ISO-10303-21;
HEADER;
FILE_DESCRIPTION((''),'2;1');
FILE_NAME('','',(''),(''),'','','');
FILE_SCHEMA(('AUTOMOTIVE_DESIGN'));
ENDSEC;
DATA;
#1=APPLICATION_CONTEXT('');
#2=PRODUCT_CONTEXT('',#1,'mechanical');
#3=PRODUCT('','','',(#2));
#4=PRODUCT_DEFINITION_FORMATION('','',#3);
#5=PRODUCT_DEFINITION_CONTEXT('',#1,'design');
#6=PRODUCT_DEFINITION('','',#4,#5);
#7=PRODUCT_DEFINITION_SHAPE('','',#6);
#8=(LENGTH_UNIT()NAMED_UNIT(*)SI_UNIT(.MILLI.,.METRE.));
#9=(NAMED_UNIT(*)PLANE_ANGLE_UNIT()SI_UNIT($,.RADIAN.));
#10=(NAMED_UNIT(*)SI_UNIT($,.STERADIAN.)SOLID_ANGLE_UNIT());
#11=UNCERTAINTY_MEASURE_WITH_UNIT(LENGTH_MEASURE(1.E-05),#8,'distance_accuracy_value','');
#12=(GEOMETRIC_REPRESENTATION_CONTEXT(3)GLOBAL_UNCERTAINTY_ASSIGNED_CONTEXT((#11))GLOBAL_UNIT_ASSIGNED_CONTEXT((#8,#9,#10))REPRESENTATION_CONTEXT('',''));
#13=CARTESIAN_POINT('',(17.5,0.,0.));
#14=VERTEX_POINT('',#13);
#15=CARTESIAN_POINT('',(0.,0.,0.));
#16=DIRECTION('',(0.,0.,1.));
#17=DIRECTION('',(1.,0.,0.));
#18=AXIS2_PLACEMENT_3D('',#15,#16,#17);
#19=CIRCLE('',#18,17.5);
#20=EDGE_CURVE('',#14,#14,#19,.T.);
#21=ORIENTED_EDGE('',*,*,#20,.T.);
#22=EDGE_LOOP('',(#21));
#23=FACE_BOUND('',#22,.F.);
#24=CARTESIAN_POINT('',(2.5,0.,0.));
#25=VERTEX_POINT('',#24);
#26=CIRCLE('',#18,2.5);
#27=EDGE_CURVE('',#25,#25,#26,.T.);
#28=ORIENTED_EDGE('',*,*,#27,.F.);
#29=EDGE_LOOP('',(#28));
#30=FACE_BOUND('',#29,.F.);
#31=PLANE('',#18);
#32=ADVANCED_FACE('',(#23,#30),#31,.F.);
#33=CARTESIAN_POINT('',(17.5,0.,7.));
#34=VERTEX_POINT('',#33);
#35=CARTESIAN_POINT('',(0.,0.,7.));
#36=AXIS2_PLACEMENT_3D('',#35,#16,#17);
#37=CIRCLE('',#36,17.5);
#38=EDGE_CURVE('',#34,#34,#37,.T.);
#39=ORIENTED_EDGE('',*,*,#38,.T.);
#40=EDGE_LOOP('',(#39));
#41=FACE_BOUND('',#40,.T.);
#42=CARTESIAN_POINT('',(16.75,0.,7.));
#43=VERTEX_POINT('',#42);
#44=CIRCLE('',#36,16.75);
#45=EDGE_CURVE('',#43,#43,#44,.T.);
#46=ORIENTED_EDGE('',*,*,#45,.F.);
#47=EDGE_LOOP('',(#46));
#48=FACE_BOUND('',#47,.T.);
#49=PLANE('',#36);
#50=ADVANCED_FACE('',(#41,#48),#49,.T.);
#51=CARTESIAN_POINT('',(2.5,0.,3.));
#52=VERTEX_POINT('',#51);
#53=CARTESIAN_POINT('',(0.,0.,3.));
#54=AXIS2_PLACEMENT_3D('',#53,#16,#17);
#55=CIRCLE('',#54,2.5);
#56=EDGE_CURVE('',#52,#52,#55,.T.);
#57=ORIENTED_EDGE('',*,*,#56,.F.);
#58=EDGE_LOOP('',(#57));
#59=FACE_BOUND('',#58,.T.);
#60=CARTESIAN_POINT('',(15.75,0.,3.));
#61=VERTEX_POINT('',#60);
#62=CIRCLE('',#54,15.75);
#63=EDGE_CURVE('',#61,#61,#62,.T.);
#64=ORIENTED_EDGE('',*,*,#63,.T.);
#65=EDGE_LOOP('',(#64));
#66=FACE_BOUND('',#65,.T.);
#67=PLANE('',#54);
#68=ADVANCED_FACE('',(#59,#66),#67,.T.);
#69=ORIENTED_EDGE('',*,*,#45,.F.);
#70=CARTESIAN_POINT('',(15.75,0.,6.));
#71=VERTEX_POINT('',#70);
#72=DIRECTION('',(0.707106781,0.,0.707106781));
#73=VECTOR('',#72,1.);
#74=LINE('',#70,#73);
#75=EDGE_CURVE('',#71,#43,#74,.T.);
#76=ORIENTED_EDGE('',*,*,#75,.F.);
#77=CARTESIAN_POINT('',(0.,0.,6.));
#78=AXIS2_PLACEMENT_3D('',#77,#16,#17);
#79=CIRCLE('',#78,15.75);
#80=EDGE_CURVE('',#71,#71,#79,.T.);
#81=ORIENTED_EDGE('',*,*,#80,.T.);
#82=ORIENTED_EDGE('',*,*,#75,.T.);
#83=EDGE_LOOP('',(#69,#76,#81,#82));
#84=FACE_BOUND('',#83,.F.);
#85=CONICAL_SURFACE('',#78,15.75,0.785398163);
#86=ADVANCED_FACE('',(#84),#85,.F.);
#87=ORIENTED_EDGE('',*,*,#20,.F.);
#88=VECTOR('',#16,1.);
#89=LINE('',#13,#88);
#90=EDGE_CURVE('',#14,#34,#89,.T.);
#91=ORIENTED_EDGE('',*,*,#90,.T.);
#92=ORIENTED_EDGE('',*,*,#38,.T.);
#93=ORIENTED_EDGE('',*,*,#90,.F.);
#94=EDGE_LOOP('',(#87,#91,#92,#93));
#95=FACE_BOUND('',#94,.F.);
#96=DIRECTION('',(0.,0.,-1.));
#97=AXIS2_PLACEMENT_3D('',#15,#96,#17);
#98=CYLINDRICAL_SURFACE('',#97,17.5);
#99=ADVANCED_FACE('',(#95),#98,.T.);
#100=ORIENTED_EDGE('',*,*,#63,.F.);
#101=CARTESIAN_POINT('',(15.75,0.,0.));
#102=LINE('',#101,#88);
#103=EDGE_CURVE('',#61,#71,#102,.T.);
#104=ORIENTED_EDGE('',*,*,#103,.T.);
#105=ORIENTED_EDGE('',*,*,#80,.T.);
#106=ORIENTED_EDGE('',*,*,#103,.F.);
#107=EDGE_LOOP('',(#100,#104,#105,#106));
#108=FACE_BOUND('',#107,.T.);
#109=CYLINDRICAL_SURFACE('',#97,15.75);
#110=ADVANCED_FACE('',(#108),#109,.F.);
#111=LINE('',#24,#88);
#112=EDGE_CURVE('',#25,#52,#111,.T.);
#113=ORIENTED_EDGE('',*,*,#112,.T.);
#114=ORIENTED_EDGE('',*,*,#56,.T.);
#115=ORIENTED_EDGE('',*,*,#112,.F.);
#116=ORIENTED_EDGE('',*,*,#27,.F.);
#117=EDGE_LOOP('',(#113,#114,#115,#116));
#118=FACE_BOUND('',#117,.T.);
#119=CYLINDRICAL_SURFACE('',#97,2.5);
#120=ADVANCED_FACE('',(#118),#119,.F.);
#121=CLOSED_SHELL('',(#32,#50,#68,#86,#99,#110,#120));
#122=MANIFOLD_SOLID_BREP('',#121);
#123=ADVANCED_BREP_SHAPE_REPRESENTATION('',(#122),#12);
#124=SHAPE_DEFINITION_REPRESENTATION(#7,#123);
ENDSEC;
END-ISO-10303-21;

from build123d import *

# Parameters (mm, degrees)
F0_R     = 17.5
F0_R_2   = 15.75
F1_DEPTH = 7
F0_R_3   = 2.5
F2_DEPTH = 3
F3_SIZE  = 1


# Not quite as in the source:
# - a feature names something its author has since deleted; it is built from what else it names


with BuildPart() as f1:
    # F0 (on Top) → F1 (new body)
    with BuildSketch(Plane.XY):
        Circle(F0_R)
        Circle(F0_R_2, mode=Mode.SUBTRACT)
    extrude(amount=F1_DEPTH)

    # F0 (on Top) → F2 (join)
    with BuildSketch(Plane.XY):
        Circle(F0_R_2)
        Circle(F0_R_3, mode=Mode.SUBTRACT)
    extrude(amount=F2_DEPTH)

    # F3
    f3_edges = [f1.edges().sort_by_distance(p)[0] for p in [
        (-15.75, 0, 7),
    ]]
    chamfer(f3_edges, length=F3_SIZE)


solid = f1.part
